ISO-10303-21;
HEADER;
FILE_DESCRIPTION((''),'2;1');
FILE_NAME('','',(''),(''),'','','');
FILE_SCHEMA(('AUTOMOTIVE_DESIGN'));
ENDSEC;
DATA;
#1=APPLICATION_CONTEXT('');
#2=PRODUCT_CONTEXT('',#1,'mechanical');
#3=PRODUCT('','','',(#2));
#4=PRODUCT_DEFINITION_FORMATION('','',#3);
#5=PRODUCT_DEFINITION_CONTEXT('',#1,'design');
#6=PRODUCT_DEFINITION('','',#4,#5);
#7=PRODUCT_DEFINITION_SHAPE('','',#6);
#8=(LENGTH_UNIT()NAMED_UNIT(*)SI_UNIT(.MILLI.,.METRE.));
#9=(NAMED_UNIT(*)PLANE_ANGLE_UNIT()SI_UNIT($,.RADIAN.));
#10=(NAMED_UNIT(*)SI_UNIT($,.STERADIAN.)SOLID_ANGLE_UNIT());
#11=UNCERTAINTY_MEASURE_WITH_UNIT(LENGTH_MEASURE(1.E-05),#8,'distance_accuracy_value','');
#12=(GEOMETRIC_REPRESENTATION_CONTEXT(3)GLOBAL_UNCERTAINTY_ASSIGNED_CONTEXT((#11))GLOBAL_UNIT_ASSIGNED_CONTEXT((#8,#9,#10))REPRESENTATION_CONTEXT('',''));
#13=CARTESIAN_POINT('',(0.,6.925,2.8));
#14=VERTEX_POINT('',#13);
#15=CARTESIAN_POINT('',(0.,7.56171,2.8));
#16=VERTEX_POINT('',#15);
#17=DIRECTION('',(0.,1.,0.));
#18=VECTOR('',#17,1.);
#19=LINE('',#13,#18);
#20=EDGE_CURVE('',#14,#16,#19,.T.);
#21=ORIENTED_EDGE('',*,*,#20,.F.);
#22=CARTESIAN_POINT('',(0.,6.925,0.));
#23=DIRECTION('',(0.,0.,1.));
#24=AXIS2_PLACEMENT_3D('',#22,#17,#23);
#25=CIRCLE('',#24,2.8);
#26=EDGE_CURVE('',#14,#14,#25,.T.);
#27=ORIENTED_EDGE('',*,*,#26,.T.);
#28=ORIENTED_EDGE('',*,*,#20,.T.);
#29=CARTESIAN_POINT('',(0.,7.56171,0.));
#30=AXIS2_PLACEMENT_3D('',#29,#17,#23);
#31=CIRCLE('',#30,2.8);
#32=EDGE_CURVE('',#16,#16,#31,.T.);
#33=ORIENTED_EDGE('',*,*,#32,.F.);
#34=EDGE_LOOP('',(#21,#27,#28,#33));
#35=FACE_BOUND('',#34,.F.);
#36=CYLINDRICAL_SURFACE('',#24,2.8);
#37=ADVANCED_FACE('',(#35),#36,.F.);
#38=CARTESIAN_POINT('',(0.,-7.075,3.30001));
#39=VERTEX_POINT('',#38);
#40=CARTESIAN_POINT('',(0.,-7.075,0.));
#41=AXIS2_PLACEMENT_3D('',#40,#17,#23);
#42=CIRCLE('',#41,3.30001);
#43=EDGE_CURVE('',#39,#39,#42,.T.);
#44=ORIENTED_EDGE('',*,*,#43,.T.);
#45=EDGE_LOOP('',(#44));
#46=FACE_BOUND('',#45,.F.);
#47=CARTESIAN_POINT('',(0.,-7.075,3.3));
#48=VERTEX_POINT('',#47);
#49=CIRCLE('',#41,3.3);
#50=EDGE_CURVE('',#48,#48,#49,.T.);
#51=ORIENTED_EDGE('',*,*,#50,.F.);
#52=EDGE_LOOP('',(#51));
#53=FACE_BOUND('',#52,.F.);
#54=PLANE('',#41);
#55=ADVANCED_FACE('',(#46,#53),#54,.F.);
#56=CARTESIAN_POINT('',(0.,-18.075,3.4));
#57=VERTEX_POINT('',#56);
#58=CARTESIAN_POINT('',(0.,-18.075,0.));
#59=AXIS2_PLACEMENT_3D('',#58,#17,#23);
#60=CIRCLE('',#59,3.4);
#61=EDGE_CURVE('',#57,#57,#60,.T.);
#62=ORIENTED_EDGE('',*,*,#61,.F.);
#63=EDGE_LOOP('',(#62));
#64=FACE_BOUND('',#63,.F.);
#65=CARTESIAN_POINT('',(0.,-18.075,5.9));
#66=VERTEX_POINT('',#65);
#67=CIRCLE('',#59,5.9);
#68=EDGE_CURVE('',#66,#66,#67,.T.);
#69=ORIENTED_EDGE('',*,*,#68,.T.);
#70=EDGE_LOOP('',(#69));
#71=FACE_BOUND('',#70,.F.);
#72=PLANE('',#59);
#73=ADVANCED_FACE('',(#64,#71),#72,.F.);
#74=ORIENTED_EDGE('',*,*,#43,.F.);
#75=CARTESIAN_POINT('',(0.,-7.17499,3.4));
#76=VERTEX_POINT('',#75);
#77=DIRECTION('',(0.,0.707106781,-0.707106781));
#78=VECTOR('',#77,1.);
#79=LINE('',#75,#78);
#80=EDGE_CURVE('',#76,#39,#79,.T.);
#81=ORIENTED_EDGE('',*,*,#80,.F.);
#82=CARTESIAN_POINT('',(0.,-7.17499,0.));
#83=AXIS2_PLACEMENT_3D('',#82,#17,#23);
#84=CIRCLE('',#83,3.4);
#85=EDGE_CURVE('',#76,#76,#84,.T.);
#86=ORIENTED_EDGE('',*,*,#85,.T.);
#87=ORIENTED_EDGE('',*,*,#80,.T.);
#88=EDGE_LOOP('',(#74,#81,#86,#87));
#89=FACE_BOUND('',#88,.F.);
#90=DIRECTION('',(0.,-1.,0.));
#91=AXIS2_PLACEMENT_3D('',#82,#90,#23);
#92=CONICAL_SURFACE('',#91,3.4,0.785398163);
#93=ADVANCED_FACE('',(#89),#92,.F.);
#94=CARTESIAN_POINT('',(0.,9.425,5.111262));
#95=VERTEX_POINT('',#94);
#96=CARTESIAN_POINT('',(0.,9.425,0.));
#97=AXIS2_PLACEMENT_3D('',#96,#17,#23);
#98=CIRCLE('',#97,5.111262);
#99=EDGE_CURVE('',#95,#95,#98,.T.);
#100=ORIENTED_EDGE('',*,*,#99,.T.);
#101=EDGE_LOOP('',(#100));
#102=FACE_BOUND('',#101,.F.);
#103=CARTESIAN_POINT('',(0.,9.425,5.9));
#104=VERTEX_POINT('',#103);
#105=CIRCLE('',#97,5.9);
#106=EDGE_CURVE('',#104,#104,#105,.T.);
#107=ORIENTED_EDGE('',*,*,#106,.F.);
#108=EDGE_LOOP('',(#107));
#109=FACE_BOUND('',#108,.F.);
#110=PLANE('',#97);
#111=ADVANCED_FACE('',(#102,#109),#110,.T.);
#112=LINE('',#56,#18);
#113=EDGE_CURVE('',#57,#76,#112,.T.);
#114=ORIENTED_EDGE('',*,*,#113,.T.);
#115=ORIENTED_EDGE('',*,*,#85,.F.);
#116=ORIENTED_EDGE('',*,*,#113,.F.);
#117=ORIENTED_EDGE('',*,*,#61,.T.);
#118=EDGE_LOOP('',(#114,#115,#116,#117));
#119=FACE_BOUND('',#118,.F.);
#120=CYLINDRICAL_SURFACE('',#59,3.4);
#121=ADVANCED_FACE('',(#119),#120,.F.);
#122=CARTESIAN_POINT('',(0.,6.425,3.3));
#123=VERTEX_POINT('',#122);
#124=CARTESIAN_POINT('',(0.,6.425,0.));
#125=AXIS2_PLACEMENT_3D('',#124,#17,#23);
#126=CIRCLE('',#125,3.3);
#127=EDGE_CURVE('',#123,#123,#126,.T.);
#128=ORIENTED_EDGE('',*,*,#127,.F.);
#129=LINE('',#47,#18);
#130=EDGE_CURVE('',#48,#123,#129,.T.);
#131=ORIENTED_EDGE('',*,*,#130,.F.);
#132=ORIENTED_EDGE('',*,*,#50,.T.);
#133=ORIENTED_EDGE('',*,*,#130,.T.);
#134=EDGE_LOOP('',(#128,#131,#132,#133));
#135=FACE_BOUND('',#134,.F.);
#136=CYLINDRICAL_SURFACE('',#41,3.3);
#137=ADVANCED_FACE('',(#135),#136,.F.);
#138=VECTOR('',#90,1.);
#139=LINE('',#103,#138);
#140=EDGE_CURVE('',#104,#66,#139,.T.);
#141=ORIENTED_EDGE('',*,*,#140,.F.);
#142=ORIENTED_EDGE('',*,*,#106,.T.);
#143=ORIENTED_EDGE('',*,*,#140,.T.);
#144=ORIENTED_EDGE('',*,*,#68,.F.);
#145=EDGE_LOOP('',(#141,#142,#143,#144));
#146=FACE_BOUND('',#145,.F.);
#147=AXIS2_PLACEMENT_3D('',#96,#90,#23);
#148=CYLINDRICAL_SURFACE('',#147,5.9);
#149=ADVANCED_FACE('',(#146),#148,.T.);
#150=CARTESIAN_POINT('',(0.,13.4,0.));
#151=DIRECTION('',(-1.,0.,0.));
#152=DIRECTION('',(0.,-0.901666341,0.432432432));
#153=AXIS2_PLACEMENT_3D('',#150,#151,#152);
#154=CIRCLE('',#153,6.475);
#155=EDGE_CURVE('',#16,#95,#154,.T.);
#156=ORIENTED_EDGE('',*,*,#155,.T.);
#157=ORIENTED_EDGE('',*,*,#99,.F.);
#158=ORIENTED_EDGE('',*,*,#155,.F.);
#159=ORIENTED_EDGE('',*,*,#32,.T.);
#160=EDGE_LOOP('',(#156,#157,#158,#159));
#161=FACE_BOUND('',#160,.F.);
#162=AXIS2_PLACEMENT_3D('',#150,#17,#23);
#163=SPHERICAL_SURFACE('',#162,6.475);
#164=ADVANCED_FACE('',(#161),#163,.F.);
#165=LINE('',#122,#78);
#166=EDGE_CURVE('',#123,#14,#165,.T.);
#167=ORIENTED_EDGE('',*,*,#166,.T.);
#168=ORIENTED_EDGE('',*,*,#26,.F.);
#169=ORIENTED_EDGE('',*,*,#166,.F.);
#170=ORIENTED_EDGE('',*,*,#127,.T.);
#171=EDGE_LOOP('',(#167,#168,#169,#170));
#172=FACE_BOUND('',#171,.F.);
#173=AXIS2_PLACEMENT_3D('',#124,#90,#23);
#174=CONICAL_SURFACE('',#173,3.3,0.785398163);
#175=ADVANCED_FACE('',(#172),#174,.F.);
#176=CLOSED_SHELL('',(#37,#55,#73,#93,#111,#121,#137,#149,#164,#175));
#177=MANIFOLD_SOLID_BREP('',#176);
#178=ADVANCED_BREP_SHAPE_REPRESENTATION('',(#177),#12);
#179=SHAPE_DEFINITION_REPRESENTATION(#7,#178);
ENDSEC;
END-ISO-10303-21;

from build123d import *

# Parameters (mm, degrees)
F2_SIZE = 0.09999


# Not quite as in the source:
# - a fillet or chamfer is up to 0.001 mm smaller than in the source, because OpenCascade refuses the exact size


with BuildPart() as f1:
    # F0 (on Right) → F1 (revolve)
    with BuildSketch(Plane.YZ):
        Polygon((6.425, 3.3), (6.925, 2.8), (6.925, 3.3), align=None)
        with BuildLine():
            ThreePointArc((7.5617104388, 2.8), (8.3591026496, 4.0638625595), (9.425, 5.1112620751))
            Line((9.425, 5.1112620751), (9.425, 5.9))
            Line((9.425, 5.9), (-18.075, 5.9))
            Line((-18.075, 5.9), (-18.075, 3.4))
            Line((-18.075, 3.4), (-7.075, 3.4))
            Line((-7.075, 3.4), (-7.075, 3.3))
            Line((-7.075, 3.3), (-6.425, 3.3))
            Line((-6.425, 3.3), (6.425, 3.3))
            Line((6.425, 3.3), (6.925, 3.3))
            Line((6.925, 3.3), (6.925, 2.8))
            Line((6.925, 2.8), (7.5617104388, 2.8))
        make_face()
    revolve(axis=Axis((0, 1.503110514, 0), (0, 1, 0)))

    # F2 (size 0.1 in the source; OpenCascade refuses exactly that, so slightly less here)
    f2_edges = [f1.edges().sort_by_distance(p)[0] for p in [
        (0, -7.075, -3.4),
    ]]
    chamfer(f2_edges, length=F2_SIZE)


solid = f1.part
